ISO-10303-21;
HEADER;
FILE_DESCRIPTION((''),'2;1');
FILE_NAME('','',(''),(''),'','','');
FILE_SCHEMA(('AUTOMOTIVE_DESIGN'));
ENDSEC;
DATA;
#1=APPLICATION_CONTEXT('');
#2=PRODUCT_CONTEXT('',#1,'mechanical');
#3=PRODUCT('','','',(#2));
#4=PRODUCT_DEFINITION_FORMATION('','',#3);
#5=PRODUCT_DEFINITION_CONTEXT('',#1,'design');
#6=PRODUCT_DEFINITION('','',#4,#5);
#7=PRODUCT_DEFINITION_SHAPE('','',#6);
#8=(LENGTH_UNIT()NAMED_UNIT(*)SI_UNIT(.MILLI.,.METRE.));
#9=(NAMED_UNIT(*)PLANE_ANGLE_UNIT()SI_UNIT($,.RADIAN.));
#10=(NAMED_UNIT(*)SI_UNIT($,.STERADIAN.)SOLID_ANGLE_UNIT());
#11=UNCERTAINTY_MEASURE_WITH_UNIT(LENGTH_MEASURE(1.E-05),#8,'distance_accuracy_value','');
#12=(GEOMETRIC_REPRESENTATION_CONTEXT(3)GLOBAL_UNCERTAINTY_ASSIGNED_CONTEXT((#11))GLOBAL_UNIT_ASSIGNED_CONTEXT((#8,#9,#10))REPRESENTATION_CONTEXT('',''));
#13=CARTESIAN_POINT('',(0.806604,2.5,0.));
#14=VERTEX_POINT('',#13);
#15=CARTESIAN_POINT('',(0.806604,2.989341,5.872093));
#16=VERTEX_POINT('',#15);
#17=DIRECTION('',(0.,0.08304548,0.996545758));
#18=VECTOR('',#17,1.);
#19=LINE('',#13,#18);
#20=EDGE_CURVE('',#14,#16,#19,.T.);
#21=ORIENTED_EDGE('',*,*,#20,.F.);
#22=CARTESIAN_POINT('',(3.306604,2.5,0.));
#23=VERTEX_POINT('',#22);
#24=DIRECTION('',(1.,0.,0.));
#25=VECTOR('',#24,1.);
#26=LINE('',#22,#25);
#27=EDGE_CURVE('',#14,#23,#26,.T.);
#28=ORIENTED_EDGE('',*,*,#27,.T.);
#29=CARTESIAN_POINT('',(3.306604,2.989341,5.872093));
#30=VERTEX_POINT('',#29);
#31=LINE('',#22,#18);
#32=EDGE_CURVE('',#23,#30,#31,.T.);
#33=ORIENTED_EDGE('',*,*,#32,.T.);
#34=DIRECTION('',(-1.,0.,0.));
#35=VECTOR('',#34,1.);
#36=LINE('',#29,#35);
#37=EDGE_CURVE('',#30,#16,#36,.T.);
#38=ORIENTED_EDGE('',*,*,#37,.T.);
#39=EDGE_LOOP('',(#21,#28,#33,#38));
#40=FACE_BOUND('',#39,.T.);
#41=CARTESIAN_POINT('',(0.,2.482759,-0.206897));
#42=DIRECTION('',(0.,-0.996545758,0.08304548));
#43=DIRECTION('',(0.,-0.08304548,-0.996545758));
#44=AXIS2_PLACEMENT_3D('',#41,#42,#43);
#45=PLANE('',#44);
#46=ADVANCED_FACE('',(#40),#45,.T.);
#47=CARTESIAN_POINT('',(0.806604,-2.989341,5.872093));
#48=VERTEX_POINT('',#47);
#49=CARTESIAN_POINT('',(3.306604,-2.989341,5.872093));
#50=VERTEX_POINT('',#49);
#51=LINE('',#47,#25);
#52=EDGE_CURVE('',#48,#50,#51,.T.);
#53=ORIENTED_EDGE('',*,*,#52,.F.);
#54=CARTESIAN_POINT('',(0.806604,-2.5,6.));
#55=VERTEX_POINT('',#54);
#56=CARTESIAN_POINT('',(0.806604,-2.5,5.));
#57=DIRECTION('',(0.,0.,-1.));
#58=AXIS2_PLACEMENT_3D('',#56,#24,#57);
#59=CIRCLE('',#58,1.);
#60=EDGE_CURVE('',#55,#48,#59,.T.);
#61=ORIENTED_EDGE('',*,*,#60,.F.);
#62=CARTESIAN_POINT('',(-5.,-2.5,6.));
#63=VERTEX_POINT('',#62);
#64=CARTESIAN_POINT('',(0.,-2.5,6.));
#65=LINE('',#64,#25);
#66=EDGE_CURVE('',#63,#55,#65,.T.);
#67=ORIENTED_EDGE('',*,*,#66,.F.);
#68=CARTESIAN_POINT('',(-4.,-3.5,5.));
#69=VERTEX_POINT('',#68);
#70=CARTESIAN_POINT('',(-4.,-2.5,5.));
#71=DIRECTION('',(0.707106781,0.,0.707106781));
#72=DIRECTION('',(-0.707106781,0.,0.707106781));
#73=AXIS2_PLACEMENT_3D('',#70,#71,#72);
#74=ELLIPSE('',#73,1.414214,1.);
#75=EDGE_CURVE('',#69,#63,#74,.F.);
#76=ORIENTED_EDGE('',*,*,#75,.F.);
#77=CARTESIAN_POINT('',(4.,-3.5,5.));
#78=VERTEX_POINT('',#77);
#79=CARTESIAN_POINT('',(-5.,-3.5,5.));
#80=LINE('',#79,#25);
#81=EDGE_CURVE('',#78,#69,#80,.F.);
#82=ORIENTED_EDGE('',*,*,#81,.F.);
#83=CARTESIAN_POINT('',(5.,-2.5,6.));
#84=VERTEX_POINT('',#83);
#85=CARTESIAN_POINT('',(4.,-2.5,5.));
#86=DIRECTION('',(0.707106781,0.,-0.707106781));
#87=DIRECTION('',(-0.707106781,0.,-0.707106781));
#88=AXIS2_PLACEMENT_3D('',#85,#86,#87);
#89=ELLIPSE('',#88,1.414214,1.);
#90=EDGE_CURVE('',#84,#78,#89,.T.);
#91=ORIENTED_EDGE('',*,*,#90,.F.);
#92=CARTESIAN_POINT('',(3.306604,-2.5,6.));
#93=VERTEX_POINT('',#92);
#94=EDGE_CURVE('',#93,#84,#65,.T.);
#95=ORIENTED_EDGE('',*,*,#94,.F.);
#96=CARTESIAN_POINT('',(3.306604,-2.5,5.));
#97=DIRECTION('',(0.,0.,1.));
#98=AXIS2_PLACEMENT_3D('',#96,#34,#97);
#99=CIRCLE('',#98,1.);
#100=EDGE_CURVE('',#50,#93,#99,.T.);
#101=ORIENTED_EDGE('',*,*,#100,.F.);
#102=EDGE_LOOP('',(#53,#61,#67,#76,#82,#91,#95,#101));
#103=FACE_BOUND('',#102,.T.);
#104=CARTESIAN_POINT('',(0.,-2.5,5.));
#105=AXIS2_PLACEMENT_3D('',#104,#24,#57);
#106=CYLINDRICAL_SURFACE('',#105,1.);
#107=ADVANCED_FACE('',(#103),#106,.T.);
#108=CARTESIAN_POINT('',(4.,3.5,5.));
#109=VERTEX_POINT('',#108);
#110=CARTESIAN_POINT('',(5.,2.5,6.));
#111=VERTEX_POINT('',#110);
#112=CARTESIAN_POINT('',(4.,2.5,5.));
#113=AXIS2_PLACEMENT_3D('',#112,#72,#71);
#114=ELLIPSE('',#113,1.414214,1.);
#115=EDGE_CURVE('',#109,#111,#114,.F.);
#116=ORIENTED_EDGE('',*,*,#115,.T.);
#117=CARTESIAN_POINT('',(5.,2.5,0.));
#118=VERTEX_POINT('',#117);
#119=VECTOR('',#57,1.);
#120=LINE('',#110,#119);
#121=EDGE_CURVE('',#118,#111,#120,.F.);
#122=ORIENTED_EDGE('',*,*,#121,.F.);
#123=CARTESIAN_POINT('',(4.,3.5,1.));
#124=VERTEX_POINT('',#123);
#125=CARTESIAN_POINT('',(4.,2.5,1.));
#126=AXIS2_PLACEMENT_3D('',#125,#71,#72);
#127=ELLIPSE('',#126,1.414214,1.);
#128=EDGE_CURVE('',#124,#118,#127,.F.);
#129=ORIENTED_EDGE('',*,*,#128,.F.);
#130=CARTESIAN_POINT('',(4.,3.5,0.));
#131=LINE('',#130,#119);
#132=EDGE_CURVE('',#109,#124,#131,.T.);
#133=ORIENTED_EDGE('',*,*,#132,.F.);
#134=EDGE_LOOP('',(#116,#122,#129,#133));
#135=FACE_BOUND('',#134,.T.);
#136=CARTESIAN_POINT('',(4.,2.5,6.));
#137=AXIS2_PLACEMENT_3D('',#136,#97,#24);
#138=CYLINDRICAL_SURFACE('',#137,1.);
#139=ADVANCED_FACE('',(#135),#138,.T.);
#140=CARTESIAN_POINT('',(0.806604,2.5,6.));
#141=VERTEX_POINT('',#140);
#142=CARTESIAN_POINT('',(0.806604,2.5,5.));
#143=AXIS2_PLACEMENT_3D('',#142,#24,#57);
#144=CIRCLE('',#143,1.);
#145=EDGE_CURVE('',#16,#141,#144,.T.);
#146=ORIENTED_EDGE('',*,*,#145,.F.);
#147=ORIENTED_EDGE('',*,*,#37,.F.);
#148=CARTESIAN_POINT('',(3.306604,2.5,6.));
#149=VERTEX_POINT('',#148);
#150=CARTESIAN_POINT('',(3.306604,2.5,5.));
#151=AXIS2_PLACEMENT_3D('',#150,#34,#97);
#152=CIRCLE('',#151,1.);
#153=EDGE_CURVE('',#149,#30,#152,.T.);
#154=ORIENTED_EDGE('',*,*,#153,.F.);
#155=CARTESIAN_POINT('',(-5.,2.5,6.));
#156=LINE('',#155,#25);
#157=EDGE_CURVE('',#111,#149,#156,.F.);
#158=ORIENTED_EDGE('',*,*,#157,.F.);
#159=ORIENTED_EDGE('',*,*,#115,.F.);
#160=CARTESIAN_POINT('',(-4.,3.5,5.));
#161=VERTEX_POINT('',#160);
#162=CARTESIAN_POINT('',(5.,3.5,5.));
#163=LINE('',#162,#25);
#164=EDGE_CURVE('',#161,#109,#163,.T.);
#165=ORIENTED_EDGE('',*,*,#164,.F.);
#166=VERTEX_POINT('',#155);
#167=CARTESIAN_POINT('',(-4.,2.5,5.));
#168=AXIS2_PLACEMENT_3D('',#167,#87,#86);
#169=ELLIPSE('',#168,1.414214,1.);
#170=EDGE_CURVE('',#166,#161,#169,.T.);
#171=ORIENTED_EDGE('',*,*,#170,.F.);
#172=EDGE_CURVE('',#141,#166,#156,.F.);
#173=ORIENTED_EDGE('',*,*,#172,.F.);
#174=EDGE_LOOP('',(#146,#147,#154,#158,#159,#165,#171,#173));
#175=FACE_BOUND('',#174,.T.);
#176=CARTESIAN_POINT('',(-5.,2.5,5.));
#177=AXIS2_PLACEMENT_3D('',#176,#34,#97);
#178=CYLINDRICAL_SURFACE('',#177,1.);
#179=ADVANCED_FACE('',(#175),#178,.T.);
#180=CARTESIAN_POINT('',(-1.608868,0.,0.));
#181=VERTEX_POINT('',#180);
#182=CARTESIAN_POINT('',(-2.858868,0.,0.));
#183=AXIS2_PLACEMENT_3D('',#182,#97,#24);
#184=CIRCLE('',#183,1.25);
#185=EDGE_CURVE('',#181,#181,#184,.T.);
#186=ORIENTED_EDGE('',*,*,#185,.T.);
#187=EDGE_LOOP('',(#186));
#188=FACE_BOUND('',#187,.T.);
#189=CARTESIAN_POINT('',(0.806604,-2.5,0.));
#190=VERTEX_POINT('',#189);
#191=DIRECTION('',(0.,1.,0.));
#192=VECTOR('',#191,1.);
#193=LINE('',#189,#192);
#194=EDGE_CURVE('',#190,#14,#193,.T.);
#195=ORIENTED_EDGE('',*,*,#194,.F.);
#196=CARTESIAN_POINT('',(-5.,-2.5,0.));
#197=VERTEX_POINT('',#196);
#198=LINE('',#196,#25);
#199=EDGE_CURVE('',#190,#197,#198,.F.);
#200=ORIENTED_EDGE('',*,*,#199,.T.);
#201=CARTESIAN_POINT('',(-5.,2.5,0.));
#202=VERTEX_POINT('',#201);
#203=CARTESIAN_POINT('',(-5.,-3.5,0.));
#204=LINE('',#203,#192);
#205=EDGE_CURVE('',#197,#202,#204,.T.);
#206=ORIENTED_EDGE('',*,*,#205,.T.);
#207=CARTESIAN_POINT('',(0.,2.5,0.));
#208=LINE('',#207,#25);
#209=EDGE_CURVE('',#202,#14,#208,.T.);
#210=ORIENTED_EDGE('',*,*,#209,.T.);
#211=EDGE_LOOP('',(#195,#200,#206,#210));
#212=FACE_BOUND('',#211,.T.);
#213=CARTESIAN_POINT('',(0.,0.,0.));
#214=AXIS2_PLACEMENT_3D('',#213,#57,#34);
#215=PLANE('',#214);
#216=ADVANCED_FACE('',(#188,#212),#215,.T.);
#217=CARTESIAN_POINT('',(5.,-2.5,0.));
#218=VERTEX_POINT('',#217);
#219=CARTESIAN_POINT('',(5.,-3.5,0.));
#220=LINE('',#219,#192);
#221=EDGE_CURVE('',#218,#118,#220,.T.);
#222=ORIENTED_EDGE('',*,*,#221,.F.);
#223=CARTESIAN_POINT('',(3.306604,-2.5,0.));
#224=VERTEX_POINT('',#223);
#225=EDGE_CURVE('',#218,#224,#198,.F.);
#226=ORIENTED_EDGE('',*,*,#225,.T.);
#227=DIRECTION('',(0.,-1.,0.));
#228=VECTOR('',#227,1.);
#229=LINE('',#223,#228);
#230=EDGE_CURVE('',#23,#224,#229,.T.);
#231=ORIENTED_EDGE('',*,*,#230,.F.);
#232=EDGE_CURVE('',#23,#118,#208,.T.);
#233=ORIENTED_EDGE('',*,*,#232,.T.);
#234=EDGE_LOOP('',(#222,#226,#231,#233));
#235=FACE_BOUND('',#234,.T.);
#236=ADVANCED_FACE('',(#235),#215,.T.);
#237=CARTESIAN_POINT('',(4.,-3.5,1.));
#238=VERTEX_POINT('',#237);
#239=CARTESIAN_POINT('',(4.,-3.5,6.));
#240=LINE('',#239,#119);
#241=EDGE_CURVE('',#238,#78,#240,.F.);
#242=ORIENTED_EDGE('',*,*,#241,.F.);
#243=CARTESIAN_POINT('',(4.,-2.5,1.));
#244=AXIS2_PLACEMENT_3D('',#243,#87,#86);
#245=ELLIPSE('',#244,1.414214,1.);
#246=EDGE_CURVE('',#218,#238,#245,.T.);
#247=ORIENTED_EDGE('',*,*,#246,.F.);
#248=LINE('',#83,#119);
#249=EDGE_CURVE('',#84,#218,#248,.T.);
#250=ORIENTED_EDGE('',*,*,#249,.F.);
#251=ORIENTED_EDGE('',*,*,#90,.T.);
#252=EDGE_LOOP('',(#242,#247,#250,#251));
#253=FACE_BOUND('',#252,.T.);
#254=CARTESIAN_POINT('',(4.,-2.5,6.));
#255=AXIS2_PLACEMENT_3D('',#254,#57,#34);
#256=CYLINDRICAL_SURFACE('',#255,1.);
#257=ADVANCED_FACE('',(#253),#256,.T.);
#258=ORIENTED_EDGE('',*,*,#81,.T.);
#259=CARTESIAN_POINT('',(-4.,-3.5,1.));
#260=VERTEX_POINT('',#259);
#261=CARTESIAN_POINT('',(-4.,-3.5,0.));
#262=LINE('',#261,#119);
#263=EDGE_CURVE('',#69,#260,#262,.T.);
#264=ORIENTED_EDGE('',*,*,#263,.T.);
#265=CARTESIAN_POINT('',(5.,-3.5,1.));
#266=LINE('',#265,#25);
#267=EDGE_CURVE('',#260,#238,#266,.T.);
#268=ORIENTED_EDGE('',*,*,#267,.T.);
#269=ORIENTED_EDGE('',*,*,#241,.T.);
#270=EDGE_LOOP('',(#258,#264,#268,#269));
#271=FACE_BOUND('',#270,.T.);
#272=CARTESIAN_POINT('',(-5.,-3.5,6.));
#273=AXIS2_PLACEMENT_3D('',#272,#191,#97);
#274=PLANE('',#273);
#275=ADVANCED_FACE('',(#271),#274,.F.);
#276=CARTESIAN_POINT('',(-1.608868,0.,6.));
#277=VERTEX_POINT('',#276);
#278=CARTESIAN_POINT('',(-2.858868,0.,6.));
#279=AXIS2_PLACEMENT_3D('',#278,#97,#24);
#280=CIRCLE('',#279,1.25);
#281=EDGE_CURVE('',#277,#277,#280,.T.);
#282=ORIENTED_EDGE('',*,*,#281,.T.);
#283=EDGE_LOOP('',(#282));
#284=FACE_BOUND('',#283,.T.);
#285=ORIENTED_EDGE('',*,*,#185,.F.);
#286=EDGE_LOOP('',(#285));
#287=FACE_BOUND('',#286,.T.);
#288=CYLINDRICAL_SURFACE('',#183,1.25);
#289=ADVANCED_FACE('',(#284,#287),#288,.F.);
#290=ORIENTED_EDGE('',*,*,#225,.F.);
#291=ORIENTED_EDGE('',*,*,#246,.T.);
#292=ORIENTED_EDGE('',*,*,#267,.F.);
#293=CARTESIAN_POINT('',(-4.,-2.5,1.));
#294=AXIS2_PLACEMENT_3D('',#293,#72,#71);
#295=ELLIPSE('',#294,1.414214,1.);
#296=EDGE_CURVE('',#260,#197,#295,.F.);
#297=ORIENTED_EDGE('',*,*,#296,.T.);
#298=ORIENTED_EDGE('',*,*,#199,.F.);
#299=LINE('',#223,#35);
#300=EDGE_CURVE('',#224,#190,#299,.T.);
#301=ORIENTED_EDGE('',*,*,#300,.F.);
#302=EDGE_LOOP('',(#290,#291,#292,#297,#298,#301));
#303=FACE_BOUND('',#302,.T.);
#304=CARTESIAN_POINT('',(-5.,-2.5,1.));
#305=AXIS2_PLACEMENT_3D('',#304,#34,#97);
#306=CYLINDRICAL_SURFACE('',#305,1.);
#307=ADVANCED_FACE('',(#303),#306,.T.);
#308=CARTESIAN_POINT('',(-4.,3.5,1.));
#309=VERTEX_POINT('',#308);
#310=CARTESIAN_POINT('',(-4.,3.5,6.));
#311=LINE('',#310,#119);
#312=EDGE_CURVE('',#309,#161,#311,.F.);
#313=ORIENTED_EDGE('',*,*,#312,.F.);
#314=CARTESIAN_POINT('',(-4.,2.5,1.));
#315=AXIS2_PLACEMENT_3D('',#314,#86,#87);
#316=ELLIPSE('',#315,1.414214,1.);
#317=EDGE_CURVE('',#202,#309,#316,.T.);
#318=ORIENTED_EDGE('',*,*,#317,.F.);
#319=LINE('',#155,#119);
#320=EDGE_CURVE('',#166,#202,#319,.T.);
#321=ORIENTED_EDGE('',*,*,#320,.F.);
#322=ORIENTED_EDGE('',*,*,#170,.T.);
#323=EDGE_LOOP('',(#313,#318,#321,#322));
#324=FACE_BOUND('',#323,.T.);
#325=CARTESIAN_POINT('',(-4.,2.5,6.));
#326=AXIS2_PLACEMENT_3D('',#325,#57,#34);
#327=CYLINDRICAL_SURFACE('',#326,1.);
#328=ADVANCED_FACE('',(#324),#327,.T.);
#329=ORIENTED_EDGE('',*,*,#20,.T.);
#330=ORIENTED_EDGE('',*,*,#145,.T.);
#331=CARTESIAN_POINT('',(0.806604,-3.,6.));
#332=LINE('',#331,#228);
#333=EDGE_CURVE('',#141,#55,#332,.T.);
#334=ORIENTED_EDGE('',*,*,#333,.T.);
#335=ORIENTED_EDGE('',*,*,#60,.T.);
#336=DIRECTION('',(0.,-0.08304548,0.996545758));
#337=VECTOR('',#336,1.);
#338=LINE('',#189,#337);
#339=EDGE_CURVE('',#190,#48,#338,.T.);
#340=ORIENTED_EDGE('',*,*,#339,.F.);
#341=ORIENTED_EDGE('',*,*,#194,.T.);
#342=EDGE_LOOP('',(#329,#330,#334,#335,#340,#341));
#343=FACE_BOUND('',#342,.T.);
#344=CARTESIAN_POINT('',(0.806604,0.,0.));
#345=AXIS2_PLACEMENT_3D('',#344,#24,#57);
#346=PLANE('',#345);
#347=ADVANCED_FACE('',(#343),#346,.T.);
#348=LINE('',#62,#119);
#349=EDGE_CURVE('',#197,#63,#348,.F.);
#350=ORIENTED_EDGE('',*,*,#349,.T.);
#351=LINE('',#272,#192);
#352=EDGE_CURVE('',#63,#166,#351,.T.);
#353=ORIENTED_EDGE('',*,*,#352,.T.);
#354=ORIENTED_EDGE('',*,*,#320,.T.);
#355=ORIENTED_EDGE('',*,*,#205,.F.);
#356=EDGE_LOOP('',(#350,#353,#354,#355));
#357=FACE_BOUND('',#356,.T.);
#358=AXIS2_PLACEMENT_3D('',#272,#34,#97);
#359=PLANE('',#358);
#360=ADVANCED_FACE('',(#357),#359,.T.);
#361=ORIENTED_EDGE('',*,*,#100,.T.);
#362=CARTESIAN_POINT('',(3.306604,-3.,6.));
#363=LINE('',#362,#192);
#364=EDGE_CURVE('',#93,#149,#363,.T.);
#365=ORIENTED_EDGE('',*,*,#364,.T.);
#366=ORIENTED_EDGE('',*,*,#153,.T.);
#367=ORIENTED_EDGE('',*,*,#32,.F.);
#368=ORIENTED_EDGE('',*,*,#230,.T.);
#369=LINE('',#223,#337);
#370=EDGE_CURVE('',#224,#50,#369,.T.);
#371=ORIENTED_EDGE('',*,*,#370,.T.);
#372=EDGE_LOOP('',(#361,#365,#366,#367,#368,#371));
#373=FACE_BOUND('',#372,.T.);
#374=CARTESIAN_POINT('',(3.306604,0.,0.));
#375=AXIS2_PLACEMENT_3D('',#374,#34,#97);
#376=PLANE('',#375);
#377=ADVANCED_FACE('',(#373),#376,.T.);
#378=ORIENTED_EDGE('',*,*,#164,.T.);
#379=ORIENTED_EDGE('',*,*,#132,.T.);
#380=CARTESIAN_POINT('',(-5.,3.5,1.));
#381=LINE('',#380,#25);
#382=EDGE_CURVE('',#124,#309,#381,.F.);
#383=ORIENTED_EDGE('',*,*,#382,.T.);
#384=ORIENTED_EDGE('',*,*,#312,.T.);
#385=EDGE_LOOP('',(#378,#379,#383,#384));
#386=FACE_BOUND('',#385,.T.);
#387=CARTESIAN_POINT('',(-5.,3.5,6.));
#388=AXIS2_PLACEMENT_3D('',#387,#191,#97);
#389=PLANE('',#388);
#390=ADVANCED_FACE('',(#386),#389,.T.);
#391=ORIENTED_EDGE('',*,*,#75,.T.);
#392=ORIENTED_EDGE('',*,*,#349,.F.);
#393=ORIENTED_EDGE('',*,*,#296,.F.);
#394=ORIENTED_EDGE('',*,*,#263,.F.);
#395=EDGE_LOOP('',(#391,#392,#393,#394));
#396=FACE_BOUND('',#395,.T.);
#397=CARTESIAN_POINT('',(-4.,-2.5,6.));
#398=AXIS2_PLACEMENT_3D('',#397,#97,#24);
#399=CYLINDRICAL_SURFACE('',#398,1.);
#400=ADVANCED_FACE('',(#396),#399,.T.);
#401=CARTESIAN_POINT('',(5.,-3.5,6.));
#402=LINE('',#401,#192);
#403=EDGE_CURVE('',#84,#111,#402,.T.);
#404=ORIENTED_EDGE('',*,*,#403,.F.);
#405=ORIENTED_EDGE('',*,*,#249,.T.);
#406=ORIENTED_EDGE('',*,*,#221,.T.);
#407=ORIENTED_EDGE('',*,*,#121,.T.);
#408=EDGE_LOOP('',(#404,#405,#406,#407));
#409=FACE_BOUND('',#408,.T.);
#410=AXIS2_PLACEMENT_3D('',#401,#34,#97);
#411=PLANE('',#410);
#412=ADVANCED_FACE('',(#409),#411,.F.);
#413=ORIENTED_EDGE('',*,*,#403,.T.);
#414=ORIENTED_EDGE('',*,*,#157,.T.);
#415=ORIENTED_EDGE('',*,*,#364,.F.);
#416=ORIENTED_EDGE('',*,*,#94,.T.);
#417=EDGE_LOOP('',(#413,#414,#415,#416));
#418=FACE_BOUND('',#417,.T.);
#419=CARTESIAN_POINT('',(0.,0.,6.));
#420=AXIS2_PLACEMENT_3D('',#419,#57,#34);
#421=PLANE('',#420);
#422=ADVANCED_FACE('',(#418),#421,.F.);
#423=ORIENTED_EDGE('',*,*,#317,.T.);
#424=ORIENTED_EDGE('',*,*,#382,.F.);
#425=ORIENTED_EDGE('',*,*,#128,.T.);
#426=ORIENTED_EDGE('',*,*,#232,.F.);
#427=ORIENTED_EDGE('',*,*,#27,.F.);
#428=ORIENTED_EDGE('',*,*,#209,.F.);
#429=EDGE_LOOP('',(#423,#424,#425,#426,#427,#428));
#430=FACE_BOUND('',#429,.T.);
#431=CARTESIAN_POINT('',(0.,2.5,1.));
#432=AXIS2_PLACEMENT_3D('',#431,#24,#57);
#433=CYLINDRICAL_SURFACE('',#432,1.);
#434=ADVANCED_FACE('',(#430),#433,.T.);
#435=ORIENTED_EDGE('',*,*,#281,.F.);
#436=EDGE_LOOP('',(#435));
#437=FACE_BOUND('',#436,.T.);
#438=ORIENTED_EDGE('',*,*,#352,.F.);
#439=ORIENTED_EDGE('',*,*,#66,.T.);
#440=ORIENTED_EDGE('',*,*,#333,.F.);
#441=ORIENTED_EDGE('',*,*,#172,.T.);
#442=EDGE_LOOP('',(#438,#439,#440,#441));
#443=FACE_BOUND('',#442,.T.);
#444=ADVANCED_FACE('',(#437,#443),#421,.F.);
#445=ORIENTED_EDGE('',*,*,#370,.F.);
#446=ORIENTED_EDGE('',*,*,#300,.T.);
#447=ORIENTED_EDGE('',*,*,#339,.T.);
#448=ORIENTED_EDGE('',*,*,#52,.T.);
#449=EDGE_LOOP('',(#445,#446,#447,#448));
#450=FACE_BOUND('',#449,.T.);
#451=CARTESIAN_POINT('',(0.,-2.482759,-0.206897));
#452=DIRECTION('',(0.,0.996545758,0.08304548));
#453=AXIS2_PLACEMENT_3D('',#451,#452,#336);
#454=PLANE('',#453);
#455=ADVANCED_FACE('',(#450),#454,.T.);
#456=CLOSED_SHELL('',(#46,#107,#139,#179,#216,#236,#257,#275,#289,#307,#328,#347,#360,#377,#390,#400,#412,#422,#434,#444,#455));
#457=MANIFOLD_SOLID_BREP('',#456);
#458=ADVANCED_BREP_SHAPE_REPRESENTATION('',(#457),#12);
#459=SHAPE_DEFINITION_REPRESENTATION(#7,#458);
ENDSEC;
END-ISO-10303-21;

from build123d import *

# Parameters (mm, degrees)
SKETCH1_W           = 10
SKETCH1_H           = 7
BOSS_EXTRUDE1_DEPTH = 6
SKETCH4_R           = 1.25
CUT_EXTRUDE1_DEPTH  = 6
FILLET1_R           = 1


with BuildPart() as part:
    # Sketch1 → Boss-Extrude1 (new body)
    with BuildSketch(Plane.XY):
        Rectangle(SKETCH1_W, SKETCH1_H)
    extrude(amount=BOSS_EXTRUDE1_DEPTH)

    # Sketch3 → Cut-Loft2 section 0
    with BuildSketch(Plane(origin=(0, 0, 0), x_dir=(-1, 0, 0), z_dir=(0, 0, -1))):
        with BuildLine():
            Line((-3.306604223, -2.5), (-0.806604223, -2.5))
            Line((-0.806604223, -2.5), (-0.806604223, 2.5))
            Line((-0.806604223, 2.5), (-3.306604223, 2.5))
            Line((-3.306604223, 2.5), (-3.306604223, -2.5))
        make_face()
    # Sketch2 → Cut-Loft2 section 1
    with BuildSketch(Plane.XY.offset(6)):
        with BuildLine():
            Line((0.806604223, -3), (3.306604223, -3))
            Line((3.306604223, -3), (3.306604223, 3))
            Line((3.306604223, 3), (0.806604223, 3))
            Line((0.806604223, 3), (0.806604223, -3))
        make_face()
    loft(mode=Mode.SUBTRACT)

    # Sketch4 → Cut-Extrude1 (cut)
    with BuildSketch(Plane.XY.offset(6)):
        with Locations((-2.858867823, 0)):
            Circle(SKETCH4_R)
    extrude(amount=-CUT_EXTRUDE1_DEPTH, mode=Mode.SUBTRACT)

    # Fillet1
    # the kernel refuses this fillet: 1 mm, written as the material it takes off along each edge
    with BuildSketch(Plane(origin=(-7.5, -3.5, 0), x_dir=(0, 0, 1), z_dir=(1, 0, 0)), Plane(origin=(7.5, 3.5, 6), x_dir=(0, -1, 0), z_dir=(-1, 0, 0))) as fillet1_piece_1:
        with BuildLine():
            CenterArc((FILLET1_R, -FILLET1_R), FILLET1_R, 90, 90)
            Line((0, -FILLET1_R), (0, 0))
            Line((0, 0), (FILLET1_R, 0))
        make_face()
    extrude(amount=15, mode=Mode.SUBTRACT)
    with BuildSketch(Plane(origin=(7.5, 3.5, 0), x_dir=(0, -1, 0), z_dir=(-1, 0, 0)), Plane(origin=(-7.5, -3.5, 6), x_dir=(0, 0, -1), z_dir=(1, 0, 0))) as fillet1_piece_2:
        with BuildLine():
            CenterArc((FILLET1_R, FILLET1_R), FILLET1_R, 180, 90)
            Line((0, FILLET1_R), (0, 0))
            Line((0, 0), (FILLET1_R, 0))
        make_face()
    extrude(amount=15, mode=Mode.SUBTRACT)
    with BuildSketch(Plane(origin=(-5, -3.5, -2.5), x_dir=(1, 0, 0), z_dir=(0, 0, 1)), Plane(origin=(-5, 3.5, -2.5), x_dir=(0, -1, 0), z_dir=(0, 0, 1))) as fillet1_piece_3:
        with BuildLine():
            CenterArc((FILLET1_R, FILLET1_R), FILLET1_R, 180, 90)
            Line((0, FILLET1_R), (0, 0))
            Line((0, 0), (FILLET1_R, 0))
        make_face()
    extrude(amount=11, mode=Mode.SUBTRACT)
    with BuildSketch(Plane(origin=(5, -3.5, -2.5), x_dir=(-1, 0, 0), z_dir=(0, 0, 1)), Plane(origin=(5, 3.5, -2.5), x_dir=(0, -1, 0), z_dir=(0, 0, 1))) as fillet1_piece_4:
        with BuildLine():
            CenterArc((FILLET1_R, -FILLET1_R), FILLET1_R, 90, 90)
            Line((0, -FILLET1_R), (0, 0))
            Line((0, 0), (FILLET1_R, 0))
        make_face()
    extrude(amount=11, mode=Mode.SUBTRACT)


solid = part.part
